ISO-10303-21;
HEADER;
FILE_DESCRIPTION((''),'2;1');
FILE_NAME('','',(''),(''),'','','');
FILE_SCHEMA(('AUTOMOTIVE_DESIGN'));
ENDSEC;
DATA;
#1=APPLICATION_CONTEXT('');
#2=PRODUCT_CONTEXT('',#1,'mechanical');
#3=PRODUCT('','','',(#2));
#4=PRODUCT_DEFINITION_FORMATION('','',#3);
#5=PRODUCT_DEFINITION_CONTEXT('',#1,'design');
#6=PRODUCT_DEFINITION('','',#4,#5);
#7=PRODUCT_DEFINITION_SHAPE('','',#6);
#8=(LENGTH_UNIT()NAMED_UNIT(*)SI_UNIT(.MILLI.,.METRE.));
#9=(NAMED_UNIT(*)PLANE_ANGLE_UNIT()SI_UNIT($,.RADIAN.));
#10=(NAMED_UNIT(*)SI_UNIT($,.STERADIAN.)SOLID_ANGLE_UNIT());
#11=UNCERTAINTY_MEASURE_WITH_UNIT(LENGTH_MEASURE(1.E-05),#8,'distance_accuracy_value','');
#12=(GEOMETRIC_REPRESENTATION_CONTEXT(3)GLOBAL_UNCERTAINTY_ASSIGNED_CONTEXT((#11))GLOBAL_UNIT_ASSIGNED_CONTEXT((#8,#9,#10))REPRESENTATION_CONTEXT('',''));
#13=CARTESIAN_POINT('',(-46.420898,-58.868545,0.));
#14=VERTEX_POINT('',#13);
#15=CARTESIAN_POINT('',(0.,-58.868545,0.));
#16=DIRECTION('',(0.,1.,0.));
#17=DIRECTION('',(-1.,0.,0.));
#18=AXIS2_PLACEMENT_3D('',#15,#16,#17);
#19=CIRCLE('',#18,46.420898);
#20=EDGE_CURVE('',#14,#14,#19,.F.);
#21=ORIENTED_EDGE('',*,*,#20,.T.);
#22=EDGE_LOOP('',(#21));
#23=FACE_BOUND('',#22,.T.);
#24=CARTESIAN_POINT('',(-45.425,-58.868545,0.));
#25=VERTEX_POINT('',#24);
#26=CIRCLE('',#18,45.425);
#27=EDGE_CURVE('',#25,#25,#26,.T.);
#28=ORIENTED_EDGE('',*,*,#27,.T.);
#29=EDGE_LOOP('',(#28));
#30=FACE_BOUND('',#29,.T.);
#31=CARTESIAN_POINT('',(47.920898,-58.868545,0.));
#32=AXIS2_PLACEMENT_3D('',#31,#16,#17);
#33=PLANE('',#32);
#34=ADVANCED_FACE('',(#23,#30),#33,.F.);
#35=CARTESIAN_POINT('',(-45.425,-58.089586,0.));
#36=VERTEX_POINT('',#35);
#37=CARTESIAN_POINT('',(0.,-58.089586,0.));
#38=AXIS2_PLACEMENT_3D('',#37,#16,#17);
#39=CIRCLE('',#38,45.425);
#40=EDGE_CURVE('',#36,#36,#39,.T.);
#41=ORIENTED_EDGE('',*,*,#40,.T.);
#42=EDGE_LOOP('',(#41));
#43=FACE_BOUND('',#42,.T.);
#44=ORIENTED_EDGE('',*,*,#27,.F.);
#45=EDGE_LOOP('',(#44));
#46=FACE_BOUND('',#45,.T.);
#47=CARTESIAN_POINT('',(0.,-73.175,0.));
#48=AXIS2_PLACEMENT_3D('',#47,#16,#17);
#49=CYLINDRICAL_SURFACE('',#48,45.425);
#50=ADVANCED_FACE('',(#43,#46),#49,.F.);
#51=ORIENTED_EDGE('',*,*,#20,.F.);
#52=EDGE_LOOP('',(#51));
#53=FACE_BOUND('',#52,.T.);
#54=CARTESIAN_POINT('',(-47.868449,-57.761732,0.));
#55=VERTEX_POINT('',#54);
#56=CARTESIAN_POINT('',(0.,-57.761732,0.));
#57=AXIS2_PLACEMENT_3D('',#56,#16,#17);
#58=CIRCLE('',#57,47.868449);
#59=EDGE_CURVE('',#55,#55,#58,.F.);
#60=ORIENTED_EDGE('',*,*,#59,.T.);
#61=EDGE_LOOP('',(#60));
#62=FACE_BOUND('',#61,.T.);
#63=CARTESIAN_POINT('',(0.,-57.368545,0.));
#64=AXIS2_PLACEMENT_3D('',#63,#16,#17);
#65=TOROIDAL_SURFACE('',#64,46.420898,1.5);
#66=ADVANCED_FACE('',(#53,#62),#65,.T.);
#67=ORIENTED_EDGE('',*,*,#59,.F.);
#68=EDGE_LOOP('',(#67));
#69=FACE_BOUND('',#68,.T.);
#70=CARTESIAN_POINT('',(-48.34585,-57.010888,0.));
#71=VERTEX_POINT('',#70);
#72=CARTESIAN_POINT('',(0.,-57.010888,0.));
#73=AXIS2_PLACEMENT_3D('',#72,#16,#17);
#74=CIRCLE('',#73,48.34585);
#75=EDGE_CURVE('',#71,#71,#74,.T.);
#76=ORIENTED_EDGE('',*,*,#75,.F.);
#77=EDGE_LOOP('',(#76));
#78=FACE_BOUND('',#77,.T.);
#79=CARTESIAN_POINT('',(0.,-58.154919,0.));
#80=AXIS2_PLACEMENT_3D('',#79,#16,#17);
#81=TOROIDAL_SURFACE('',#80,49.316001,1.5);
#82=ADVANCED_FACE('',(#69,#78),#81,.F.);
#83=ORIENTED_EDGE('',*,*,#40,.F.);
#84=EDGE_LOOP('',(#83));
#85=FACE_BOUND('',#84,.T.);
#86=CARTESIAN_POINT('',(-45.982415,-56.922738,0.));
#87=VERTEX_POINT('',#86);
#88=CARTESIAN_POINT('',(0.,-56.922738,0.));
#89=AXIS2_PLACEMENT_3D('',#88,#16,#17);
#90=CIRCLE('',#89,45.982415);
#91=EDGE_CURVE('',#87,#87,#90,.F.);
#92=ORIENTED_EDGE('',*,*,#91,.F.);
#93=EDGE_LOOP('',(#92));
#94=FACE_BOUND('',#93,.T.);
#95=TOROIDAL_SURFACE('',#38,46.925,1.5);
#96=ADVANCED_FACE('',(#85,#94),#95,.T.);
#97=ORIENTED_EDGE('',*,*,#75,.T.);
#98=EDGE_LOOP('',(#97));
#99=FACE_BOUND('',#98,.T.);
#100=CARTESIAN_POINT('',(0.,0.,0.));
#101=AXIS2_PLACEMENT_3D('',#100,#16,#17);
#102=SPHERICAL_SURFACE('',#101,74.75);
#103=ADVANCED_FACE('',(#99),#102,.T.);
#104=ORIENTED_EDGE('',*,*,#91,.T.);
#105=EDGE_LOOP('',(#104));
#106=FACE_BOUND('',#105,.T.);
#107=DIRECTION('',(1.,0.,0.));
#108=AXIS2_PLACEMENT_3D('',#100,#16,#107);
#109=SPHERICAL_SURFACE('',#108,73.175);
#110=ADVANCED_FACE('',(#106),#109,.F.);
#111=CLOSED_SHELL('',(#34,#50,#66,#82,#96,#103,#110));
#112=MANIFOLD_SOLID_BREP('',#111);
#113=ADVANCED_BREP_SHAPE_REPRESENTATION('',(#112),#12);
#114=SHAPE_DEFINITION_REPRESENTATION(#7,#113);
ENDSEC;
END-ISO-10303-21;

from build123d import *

# Parameters (mm, degrees)
CUT_EXTRUDE1_DEPTH = 65
SKETCH4_W          = 2.495898364
SKETCH4_H          = 1.5
FILLET1_R          = 1.5
FILLET2_R          = 1.5
FILLET3_R          = 1.5


with BuildPart() as part:
    # Sketch1 → Revolve1 (revolve)
    with BuildSketch(Plane.XY):
        with BuildLine():
            Line((0, 74.75), (0, 73.175))
            ThreePointArc((0, 73.175), (73.175, 0), (0, -73.175))
            Line((0, -73.175), (0, -74.75))
            ThreePointArc((0, -74.75), (74.75, 0), (0, 74.75))
        make_face()
    revolve(axis=Axis((0, 74.75, 0), (0, -1, 0)))

    # Sketch3 → Cut-Extrude1 (cut, symmetric)
    with BuildSketch(Plane.XY):
        Polygon((45.425, -57.368545389), (-45.425, -57.368545389), (-47.920898364, -57.368545389), (-47.920898364, -74.75), (47.920898364, -74.75), (47.920898364, -57.368545389), align=None)
    extrude(amount=CUT_EXTRUDE1_DEPTH, both=True, mode=Mode.SUBTRACT)

    # Sketch4 → Revolve2 (revolve)
    with BuildSketch(Plane.XY, mode=Mode.PRIVATE) as revolve2_sk:
        with Locations((46.672949182, -58.118545389)):
            Rectangle(SKETCH4_W, SKETCH4_H)
    revolve(revolve2_sk.sketch.rotate(Axis((0, -73.175, 0), (0, -1, 0)), 180), axis=Axis((0, -73.175, 0), (0, -1, 0)))

    # Fillet1
    fillet1_edges = [part.edges().sort_by_distance(p)[0] for p in [
        (47.920898364, -58.868545389, 0),
    ]]
    fillet(fillet1_edges, radius=FILLET1_R - 0.0001)  # a hair under: the kernel refuses the full size

    # Fillet2
    fillet2_edges = [part.edges().sort_by_distance(p)[0] for p in [
        (0, -57.368545389, -47.920898364),
    ]]
    fillet(fillet2_edges, radius=FILLET2_R)

    # Fillet3
    fillet3_edges = [part.edges().sort_by_distance(p)[0] for p in [
        (0, -57.368545389, -45.425),
    ]]
    fillet(fillet3_edges, radius=FILLET3_R)


solid = part.part
